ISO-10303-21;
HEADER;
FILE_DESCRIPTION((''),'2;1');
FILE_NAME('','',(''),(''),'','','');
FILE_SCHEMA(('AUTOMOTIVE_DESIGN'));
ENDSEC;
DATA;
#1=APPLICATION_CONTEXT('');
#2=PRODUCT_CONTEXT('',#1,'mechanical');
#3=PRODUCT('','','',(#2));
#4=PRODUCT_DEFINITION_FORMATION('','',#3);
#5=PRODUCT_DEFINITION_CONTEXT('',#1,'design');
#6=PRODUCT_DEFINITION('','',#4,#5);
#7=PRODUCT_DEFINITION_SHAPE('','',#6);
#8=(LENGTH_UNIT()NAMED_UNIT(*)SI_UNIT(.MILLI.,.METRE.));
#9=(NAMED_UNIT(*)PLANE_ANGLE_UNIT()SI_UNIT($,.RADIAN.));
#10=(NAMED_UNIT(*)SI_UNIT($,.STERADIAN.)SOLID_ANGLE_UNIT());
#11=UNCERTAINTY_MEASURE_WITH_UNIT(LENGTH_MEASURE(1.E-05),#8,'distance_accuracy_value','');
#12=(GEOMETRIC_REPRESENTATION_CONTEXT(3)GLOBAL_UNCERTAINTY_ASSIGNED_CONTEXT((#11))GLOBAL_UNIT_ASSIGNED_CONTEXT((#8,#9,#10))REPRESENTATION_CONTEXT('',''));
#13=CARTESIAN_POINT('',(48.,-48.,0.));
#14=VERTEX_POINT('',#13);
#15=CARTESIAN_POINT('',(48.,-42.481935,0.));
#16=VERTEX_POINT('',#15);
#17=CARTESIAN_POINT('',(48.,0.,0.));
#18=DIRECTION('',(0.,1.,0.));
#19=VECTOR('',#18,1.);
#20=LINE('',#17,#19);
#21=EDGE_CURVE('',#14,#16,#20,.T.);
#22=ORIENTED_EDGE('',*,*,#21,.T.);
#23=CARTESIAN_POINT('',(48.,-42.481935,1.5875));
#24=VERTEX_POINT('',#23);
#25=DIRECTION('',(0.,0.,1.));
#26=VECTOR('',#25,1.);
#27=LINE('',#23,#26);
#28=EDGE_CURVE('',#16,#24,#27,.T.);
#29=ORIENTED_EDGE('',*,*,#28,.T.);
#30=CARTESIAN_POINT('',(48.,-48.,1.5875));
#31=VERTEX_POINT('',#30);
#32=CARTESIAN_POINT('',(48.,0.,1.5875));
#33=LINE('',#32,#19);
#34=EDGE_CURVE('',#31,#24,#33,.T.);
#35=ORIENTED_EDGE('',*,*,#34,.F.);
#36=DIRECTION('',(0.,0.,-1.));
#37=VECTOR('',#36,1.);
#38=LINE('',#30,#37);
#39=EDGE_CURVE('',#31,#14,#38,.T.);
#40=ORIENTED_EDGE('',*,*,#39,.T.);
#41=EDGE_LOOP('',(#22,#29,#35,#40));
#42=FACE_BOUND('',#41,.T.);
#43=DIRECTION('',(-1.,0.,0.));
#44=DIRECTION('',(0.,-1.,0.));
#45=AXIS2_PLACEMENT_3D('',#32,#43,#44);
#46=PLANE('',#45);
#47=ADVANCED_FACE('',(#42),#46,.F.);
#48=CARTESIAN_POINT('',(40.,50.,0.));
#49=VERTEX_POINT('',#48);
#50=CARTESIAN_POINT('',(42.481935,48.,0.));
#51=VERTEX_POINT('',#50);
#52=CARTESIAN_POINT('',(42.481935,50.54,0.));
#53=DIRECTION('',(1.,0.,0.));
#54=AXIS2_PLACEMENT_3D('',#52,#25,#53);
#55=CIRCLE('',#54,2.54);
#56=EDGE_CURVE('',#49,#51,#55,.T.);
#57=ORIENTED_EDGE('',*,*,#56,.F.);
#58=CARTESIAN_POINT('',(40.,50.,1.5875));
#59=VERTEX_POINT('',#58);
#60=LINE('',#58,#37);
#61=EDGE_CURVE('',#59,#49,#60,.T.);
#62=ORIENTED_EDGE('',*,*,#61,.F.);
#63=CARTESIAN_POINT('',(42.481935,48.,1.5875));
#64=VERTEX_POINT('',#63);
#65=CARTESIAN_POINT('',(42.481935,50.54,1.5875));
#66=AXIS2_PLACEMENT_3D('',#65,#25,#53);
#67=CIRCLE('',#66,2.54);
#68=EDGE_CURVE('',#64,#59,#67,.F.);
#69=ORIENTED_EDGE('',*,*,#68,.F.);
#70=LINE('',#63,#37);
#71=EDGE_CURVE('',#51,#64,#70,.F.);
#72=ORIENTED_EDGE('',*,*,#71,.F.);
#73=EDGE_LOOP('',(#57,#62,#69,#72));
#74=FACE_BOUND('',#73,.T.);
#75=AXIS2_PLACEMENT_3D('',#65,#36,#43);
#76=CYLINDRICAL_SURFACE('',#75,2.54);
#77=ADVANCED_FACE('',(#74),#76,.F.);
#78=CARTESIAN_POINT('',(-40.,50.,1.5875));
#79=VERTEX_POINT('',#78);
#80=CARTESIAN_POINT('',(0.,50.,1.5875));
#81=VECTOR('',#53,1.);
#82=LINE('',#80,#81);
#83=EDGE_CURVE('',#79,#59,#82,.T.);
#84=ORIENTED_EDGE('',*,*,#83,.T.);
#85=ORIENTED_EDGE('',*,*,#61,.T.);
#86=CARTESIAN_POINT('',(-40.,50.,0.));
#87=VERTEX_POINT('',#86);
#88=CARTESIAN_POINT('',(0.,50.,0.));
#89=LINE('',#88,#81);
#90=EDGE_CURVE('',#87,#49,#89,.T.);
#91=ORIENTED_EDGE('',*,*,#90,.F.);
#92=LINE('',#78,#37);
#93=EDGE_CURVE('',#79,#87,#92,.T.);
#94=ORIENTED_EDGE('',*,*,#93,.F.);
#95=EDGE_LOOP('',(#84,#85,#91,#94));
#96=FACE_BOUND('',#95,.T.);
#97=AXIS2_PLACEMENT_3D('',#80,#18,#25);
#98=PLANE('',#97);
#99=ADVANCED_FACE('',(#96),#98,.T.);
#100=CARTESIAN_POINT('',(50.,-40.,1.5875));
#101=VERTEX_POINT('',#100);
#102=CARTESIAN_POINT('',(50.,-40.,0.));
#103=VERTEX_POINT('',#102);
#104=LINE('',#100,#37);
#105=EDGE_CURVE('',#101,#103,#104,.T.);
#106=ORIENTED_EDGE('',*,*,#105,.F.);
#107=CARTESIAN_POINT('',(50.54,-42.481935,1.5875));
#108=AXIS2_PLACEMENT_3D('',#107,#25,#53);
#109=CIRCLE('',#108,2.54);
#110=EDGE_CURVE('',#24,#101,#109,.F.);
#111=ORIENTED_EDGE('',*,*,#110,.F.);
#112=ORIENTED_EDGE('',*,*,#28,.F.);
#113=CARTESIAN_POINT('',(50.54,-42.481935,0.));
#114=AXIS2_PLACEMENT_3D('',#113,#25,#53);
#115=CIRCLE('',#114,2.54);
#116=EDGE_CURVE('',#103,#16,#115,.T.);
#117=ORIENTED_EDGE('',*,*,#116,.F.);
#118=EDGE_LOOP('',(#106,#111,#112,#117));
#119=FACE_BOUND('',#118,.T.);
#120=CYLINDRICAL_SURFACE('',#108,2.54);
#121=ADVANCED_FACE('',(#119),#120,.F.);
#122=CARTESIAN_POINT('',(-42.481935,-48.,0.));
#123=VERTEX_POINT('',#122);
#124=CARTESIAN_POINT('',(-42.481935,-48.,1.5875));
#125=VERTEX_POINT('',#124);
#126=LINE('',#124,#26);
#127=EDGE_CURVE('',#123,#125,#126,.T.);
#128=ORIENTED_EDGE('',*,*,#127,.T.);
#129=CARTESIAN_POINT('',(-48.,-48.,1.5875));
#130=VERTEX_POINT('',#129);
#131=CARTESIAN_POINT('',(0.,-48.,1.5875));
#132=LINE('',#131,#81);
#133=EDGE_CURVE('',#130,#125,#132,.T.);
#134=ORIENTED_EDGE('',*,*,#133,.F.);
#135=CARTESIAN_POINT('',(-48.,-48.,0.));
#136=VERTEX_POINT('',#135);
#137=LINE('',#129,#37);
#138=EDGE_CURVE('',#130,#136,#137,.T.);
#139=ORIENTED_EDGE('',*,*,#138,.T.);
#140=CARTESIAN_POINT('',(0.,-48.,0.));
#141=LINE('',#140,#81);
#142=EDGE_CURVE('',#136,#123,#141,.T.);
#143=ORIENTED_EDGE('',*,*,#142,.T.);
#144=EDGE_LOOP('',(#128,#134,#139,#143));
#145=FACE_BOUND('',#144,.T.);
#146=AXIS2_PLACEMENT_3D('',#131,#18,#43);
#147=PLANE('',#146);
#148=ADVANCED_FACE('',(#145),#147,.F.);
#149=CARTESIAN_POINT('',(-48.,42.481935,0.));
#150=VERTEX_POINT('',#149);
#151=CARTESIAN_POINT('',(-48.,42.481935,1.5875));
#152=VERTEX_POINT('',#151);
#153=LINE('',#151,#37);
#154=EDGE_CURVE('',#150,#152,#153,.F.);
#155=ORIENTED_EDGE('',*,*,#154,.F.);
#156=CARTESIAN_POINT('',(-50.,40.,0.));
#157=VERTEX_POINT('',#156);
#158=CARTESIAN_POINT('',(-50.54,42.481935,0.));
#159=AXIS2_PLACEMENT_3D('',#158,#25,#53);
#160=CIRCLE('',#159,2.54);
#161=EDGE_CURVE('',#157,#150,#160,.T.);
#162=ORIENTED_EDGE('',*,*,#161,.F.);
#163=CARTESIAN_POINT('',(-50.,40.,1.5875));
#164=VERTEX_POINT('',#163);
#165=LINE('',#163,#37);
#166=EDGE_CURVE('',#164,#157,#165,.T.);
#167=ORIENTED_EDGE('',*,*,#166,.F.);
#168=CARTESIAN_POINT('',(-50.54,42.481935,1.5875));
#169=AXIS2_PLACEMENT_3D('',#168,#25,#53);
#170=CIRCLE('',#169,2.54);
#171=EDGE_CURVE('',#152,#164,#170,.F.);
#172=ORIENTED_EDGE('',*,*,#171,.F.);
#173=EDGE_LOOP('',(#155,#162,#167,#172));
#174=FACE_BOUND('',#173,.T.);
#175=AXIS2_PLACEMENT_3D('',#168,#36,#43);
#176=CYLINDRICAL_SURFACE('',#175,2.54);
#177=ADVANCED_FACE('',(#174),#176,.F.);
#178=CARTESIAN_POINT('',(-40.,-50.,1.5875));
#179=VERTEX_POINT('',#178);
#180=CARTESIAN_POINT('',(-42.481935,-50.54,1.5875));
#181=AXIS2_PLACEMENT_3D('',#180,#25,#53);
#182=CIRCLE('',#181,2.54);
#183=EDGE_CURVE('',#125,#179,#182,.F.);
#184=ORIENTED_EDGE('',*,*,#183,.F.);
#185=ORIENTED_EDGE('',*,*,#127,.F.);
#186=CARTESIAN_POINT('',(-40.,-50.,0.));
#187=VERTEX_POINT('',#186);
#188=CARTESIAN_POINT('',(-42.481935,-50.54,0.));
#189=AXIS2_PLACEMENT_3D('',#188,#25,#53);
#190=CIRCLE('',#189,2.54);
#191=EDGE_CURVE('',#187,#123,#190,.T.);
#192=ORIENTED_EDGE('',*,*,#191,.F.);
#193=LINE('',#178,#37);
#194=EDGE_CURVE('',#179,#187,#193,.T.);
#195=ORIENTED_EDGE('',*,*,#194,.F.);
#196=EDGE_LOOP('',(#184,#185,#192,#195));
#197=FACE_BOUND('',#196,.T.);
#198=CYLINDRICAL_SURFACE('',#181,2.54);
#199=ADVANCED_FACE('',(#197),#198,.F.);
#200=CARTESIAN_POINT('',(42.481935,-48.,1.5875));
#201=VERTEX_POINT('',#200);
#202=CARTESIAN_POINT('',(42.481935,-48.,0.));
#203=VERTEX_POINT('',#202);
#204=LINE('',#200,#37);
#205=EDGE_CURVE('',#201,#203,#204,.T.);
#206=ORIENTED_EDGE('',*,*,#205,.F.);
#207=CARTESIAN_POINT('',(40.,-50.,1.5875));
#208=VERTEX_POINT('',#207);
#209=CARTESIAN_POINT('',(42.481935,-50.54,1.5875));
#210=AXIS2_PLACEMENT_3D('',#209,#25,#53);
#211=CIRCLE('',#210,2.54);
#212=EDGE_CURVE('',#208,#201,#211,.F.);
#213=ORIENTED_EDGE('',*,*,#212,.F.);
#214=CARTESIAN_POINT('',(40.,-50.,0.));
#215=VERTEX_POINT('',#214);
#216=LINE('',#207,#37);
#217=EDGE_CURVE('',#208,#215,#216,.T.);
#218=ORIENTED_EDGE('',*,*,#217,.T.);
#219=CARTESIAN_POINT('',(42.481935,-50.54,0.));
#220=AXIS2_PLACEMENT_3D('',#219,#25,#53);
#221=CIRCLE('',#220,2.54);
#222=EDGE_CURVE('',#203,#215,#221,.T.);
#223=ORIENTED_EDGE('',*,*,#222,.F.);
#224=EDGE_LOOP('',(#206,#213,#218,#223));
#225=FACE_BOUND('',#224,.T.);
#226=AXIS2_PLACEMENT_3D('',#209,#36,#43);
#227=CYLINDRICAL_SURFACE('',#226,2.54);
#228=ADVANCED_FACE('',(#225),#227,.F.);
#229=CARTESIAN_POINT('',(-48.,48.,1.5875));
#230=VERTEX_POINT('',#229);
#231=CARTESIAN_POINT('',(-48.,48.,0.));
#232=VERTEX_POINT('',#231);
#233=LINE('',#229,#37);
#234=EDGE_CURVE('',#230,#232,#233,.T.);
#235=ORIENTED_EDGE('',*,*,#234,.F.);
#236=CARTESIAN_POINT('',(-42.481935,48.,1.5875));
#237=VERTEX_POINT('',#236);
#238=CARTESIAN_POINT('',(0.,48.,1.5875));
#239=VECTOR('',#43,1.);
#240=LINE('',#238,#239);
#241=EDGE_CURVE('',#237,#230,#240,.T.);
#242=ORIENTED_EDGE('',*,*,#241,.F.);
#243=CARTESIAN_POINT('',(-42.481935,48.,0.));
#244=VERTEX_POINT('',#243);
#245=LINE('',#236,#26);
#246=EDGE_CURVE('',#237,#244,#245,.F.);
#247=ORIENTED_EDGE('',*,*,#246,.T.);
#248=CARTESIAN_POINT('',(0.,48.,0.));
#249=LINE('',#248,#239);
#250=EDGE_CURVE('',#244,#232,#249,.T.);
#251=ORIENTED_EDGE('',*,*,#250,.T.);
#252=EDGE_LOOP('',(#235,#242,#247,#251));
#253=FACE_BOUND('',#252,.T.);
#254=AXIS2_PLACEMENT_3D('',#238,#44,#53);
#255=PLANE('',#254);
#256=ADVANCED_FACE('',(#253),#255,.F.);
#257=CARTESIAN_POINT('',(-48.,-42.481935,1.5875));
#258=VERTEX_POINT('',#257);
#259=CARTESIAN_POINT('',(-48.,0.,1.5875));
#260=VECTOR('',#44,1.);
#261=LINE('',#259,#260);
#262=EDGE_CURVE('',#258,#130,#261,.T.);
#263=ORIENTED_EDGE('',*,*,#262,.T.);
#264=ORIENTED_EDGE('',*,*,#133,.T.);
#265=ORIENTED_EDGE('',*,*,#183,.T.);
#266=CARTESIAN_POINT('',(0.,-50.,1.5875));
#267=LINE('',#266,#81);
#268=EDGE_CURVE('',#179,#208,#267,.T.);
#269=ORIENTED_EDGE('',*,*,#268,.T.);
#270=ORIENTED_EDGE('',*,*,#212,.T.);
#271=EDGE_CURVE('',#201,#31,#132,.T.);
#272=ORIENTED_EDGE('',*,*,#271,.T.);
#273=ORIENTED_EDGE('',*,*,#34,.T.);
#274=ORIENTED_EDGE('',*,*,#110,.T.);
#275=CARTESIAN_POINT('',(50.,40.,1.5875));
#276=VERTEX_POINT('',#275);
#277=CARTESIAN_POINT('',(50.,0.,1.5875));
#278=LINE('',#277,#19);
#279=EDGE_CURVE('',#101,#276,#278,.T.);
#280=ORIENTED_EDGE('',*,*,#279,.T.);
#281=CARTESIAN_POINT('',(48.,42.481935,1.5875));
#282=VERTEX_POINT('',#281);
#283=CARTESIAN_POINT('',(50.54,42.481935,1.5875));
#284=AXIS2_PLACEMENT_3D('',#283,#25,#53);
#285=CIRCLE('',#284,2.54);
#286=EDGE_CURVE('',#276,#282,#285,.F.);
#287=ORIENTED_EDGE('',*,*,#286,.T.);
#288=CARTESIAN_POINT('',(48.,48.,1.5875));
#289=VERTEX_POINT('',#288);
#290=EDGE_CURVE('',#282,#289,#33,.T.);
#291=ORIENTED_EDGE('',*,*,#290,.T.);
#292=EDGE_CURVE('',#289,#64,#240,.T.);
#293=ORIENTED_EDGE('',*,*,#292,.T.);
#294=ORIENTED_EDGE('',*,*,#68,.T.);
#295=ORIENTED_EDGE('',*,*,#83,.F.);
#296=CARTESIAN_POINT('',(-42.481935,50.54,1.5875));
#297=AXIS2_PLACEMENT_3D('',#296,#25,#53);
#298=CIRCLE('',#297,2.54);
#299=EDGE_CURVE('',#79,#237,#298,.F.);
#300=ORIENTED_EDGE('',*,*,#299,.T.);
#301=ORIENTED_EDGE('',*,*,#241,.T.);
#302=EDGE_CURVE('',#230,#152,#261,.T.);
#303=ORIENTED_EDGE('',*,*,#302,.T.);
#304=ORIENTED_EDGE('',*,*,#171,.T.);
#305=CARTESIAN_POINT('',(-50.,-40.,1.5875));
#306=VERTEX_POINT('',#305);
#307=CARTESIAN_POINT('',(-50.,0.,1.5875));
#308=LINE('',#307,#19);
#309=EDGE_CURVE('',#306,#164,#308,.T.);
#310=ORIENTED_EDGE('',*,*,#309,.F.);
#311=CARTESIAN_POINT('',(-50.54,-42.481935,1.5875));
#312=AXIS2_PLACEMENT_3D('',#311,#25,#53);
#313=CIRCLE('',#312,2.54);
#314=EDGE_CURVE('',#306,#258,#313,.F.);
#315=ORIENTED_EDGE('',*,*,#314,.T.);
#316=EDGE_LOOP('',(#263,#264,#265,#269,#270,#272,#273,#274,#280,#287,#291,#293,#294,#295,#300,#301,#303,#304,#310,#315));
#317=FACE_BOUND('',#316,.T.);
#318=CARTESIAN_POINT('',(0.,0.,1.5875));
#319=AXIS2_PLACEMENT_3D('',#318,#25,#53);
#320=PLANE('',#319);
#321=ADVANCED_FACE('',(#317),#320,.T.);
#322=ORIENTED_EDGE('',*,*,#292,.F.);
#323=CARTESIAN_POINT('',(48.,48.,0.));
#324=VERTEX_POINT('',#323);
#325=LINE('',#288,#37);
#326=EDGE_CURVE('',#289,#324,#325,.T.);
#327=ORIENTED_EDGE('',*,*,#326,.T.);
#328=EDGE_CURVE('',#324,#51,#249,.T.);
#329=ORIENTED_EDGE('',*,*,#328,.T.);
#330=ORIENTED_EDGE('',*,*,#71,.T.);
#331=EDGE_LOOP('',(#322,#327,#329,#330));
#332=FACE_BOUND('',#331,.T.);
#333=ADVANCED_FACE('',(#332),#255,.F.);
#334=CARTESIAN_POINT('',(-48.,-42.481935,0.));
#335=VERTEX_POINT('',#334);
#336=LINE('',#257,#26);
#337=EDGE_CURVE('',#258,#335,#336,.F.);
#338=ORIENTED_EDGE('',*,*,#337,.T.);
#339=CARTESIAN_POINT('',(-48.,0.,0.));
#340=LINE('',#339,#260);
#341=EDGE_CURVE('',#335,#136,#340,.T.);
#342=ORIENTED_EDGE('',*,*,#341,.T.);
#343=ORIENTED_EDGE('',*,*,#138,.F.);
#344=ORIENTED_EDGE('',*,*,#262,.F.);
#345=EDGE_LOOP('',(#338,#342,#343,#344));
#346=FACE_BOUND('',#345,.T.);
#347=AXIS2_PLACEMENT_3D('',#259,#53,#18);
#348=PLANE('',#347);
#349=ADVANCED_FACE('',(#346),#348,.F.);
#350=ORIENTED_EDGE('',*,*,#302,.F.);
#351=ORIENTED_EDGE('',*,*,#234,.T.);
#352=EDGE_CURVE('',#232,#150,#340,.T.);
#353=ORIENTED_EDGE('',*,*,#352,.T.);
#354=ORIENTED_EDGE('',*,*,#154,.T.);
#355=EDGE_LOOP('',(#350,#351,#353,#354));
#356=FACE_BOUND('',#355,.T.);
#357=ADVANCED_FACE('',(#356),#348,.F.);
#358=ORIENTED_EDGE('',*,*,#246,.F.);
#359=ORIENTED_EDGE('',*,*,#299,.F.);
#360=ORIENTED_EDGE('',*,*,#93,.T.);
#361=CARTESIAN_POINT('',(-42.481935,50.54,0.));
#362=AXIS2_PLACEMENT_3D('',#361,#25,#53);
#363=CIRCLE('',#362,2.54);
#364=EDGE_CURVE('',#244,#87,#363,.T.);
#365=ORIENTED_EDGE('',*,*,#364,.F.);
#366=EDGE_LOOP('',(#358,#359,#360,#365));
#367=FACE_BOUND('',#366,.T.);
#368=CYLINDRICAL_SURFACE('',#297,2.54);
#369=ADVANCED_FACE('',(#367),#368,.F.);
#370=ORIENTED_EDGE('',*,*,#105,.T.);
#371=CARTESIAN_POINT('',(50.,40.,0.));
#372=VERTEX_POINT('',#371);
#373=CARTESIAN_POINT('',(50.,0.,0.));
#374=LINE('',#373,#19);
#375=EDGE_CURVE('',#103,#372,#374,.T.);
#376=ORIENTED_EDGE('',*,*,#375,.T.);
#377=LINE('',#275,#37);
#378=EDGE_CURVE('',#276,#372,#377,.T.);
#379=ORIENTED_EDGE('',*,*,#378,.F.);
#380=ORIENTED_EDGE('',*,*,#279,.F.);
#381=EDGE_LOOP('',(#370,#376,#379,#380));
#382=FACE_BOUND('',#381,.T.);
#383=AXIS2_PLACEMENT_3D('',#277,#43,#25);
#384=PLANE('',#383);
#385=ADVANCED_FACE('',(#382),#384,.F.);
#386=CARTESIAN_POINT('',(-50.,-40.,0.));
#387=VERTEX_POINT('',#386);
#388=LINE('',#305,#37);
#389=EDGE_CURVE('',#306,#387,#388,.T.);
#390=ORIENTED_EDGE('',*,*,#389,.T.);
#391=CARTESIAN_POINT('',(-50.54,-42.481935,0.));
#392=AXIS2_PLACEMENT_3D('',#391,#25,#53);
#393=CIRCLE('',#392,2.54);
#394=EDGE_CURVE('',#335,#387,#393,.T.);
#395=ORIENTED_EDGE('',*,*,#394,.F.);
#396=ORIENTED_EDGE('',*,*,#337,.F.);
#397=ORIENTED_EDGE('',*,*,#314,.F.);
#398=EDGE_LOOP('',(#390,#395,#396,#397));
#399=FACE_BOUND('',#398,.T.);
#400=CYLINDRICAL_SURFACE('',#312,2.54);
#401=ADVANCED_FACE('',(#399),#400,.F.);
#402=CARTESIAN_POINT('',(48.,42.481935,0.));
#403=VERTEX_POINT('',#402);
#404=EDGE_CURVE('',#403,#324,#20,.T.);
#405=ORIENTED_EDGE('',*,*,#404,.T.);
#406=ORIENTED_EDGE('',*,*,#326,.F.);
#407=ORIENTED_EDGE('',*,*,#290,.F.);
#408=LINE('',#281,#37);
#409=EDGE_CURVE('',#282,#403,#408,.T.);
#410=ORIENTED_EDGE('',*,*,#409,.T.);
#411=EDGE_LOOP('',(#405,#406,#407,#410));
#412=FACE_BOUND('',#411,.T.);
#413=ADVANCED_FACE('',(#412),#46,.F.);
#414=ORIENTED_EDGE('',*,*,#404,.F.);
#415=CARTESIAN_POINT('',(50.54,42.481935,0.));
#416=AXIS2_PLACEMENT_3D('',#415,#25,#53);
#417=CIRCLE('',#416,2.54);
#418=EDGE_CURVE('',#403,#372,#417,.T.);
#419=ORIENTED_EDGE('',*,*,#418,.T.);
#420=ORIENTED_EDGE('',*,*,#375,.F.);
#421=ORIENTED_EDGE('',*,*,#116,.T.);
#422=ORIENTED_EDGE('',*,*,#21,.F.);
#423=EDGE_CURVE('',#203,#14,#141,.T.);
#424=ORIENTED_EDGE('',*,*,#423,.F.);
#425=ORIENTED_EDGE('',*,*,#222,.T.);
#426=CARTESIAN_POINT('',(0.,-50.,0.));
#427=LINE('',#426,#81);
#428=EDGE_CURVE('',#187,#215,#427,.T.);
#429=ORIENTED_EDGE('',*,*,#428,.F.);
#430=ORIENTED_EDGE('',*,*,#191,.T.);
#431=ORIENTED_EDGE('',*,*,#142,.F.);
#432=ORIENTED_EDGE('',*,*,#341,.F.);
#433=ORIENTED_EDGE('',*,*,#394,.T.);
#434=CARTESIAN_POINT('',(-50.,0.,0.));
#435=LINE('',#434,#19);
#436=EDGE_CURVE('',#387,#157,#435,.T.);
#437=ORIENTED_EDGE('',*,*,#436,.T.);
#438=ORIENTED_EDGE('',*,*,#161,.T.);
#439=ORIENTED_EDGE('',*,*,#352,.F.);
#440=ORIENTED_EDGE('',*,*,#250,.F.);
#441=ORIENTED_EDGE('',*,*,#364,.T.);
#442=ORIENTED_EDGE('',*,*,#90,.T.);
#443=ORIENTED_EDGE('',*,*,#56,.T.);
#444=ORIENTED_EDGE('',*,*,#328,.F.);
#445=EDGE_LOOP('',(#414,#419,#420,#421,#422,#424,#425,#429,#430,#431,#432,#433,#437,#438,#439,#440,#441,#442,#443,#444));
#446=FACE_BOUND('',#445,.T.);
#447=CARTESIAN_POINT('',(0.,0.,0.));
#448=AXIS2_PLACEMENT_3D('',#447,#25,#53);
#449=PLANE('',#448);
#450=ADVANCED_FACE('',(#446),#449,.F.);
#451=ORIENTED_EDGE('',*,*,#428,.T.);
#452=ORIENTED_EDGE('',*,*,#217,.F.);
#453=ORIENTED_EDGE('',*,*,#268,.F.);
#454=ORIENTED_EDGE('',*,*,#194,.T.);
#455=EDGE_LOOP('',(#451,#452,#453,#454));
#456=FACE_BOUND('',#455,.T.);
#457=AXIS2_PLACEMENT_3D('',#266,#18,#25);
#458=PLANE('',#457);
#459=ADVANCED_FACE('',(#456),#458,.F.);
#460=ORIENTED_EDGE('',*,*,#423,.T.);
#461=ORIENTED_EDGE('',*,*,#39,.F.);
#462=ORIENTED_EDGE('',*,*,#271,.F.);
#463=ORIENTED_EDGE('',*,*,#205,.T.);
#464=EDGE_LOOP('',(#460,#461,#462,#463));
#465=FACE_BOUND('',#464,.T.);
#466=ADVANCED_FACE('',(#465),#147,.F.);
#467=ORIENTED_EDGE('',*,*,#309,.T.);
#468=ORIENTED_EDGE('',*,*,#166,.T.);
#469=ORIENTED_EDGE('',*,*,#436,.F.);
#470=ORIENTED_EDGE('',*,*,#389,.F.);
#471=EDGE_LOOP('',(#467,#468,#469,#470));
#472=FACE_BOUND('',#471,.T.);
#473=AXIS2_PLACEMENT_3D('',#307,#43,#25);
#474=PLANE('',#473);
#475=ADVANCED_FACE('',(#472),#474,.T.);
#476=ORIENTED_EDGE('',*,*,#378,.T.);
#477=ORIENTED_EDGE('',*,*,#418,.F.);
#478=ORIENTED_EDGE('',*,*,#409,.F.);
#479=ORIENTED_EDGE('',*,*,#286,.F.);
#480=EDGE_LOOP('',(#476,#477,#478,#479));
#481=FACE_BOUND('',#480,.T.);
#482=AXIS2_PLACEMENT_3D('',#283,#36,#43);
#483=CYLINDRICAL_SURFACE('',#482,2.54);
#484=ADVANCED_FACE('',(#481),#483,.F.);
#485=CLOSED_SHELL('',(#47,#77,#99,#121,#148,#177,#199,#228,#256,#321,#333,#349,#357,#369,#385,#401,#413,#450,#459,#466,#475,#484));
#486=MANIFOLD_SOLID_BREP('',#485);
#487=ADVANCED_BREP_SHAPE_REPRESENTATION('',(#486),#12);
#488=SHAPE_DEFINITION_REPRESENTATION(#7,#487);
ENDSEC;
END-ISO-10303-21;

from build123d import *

# Parameters (mm, degrees)
BOSS_EXTRUDE1_DEPTH = 1.5875
FILLET1_R           = 2.54


with BuildPart() as part:
    # Sketch1 → Boss-Extrude1 (new body)
    with BuildSketch(Plane.XY):
        Polygon((40, 50), (-40, 50), (-40, 48), (-48, 48), (-48, 40), (-50, 40), (-50, -37.864895224), (-50, -40), (-48, -40), (-48, -48), (-40, -48), (-40, -50), (-37.864895224, -50), (40, -50), (40, -48), (48, -48), (48, -40), (50, -40), (50, 40), (48, 40), (48, 48), (40, 48), align=None)
    extrude(amount=BOSS_EXTRUDE1_DEPTH)

    # Fillet1
    # the kernel refuses this fillet: 2.54 mm, written as the material it adds along each edge
    with BuildSketch(Plane(origin=(-48, -40, 0), x_dir=(0, -1, 0), z_dir=(0, 0, 1)), Plane(origin=(40, -48, 0), x_dir=(1, 0, 0), z_dir=(0, 0, 1)), Plane(origin=(48, 40, 0), x_dir=(0, 1, 0), z_dir=(0, 0, 1)), Plane(origin=(-40, 48, 0), x_dir=(-1, 0, 0), z_dir=(0, 0, 1))) as fillet1_piece_1:
        with BuildLine():
            CenterArc((2.481934729, -2.54), FILLET1_R, 90, 77.725329785)
            Line((0, -2), (-0.049638695, -1.9892))
            ThreePointArc((-0.049638695, -1.9892), (-0.0508, -1), (-0.0508, 0))
            Line((-0.0508, 0), (0, 0.0508))
            Line((0, 0.0508), (2.481934729, 0.0508))
            Line((2.481934729, 0.0508), (2.481934729, 0))
        make_face()
    extrude(amount=1.5875)
    with BuildSketch(Plane(origin=(-40, -48, 0), x_dir=(-3.737454790095179e-12, -1.0, 0), z_dir=(0, 0, 1)), Plane(origin=(48, -40, 0), x_dir=(1.0, -3.7339020764163554e-12, 0), z_dir=(0, 0, 1)), Plane(origin=(-48, 40, 0), x_dir=(-1.0, 3.737454790095126e-12, 0), z_dir=(0, 0, 1))) as fillet1_piece_2:
        with BuildLine():
            CenterArc((2.54, -2.481934729), FILLET1_R, 102.274670215, 77.725329785)
            Line((0, -2.481934729), (-0.0508, -2.481934729))
            Line((-0.0508, -2.481934729), (-0.0508, 0))
            Line((-0.0508, 0), (0, 0.0508))
            ThreePointArc((0, 0.0508), (1, 0.0508), (1.9892, 0.049638695))
            Line((1.9892, 0.049638695), (2, 0))
        make_face()
    extrude(amount=1.5875)
    with BuildSketch(Plane(origin=(40, 48, 0), x_dir=(1, 0, 0), z_dir=(0, 0, 1))) as fillet1_piece_3:
        with BuildLine():
            CenterArc((2.481934729, 2.54), FILLET1_R, 192.274670215, 77.725329785)
            Line((0, 2), (-0.049638695, 1.9892))
            ThreePointArc((-0.049638695, 1.9892), (-0.0508, 1), (-0.0508, 0))
            Line((-0.0508, 0), (0, -0.0508))
            Line((0, -0.0508), (2.481934729, -0.0508))
            Line((2.481934729, -0.0508), (2.481934729, 0))
        make_face()
    extrude(amount=1.5875)


solid = part.part
